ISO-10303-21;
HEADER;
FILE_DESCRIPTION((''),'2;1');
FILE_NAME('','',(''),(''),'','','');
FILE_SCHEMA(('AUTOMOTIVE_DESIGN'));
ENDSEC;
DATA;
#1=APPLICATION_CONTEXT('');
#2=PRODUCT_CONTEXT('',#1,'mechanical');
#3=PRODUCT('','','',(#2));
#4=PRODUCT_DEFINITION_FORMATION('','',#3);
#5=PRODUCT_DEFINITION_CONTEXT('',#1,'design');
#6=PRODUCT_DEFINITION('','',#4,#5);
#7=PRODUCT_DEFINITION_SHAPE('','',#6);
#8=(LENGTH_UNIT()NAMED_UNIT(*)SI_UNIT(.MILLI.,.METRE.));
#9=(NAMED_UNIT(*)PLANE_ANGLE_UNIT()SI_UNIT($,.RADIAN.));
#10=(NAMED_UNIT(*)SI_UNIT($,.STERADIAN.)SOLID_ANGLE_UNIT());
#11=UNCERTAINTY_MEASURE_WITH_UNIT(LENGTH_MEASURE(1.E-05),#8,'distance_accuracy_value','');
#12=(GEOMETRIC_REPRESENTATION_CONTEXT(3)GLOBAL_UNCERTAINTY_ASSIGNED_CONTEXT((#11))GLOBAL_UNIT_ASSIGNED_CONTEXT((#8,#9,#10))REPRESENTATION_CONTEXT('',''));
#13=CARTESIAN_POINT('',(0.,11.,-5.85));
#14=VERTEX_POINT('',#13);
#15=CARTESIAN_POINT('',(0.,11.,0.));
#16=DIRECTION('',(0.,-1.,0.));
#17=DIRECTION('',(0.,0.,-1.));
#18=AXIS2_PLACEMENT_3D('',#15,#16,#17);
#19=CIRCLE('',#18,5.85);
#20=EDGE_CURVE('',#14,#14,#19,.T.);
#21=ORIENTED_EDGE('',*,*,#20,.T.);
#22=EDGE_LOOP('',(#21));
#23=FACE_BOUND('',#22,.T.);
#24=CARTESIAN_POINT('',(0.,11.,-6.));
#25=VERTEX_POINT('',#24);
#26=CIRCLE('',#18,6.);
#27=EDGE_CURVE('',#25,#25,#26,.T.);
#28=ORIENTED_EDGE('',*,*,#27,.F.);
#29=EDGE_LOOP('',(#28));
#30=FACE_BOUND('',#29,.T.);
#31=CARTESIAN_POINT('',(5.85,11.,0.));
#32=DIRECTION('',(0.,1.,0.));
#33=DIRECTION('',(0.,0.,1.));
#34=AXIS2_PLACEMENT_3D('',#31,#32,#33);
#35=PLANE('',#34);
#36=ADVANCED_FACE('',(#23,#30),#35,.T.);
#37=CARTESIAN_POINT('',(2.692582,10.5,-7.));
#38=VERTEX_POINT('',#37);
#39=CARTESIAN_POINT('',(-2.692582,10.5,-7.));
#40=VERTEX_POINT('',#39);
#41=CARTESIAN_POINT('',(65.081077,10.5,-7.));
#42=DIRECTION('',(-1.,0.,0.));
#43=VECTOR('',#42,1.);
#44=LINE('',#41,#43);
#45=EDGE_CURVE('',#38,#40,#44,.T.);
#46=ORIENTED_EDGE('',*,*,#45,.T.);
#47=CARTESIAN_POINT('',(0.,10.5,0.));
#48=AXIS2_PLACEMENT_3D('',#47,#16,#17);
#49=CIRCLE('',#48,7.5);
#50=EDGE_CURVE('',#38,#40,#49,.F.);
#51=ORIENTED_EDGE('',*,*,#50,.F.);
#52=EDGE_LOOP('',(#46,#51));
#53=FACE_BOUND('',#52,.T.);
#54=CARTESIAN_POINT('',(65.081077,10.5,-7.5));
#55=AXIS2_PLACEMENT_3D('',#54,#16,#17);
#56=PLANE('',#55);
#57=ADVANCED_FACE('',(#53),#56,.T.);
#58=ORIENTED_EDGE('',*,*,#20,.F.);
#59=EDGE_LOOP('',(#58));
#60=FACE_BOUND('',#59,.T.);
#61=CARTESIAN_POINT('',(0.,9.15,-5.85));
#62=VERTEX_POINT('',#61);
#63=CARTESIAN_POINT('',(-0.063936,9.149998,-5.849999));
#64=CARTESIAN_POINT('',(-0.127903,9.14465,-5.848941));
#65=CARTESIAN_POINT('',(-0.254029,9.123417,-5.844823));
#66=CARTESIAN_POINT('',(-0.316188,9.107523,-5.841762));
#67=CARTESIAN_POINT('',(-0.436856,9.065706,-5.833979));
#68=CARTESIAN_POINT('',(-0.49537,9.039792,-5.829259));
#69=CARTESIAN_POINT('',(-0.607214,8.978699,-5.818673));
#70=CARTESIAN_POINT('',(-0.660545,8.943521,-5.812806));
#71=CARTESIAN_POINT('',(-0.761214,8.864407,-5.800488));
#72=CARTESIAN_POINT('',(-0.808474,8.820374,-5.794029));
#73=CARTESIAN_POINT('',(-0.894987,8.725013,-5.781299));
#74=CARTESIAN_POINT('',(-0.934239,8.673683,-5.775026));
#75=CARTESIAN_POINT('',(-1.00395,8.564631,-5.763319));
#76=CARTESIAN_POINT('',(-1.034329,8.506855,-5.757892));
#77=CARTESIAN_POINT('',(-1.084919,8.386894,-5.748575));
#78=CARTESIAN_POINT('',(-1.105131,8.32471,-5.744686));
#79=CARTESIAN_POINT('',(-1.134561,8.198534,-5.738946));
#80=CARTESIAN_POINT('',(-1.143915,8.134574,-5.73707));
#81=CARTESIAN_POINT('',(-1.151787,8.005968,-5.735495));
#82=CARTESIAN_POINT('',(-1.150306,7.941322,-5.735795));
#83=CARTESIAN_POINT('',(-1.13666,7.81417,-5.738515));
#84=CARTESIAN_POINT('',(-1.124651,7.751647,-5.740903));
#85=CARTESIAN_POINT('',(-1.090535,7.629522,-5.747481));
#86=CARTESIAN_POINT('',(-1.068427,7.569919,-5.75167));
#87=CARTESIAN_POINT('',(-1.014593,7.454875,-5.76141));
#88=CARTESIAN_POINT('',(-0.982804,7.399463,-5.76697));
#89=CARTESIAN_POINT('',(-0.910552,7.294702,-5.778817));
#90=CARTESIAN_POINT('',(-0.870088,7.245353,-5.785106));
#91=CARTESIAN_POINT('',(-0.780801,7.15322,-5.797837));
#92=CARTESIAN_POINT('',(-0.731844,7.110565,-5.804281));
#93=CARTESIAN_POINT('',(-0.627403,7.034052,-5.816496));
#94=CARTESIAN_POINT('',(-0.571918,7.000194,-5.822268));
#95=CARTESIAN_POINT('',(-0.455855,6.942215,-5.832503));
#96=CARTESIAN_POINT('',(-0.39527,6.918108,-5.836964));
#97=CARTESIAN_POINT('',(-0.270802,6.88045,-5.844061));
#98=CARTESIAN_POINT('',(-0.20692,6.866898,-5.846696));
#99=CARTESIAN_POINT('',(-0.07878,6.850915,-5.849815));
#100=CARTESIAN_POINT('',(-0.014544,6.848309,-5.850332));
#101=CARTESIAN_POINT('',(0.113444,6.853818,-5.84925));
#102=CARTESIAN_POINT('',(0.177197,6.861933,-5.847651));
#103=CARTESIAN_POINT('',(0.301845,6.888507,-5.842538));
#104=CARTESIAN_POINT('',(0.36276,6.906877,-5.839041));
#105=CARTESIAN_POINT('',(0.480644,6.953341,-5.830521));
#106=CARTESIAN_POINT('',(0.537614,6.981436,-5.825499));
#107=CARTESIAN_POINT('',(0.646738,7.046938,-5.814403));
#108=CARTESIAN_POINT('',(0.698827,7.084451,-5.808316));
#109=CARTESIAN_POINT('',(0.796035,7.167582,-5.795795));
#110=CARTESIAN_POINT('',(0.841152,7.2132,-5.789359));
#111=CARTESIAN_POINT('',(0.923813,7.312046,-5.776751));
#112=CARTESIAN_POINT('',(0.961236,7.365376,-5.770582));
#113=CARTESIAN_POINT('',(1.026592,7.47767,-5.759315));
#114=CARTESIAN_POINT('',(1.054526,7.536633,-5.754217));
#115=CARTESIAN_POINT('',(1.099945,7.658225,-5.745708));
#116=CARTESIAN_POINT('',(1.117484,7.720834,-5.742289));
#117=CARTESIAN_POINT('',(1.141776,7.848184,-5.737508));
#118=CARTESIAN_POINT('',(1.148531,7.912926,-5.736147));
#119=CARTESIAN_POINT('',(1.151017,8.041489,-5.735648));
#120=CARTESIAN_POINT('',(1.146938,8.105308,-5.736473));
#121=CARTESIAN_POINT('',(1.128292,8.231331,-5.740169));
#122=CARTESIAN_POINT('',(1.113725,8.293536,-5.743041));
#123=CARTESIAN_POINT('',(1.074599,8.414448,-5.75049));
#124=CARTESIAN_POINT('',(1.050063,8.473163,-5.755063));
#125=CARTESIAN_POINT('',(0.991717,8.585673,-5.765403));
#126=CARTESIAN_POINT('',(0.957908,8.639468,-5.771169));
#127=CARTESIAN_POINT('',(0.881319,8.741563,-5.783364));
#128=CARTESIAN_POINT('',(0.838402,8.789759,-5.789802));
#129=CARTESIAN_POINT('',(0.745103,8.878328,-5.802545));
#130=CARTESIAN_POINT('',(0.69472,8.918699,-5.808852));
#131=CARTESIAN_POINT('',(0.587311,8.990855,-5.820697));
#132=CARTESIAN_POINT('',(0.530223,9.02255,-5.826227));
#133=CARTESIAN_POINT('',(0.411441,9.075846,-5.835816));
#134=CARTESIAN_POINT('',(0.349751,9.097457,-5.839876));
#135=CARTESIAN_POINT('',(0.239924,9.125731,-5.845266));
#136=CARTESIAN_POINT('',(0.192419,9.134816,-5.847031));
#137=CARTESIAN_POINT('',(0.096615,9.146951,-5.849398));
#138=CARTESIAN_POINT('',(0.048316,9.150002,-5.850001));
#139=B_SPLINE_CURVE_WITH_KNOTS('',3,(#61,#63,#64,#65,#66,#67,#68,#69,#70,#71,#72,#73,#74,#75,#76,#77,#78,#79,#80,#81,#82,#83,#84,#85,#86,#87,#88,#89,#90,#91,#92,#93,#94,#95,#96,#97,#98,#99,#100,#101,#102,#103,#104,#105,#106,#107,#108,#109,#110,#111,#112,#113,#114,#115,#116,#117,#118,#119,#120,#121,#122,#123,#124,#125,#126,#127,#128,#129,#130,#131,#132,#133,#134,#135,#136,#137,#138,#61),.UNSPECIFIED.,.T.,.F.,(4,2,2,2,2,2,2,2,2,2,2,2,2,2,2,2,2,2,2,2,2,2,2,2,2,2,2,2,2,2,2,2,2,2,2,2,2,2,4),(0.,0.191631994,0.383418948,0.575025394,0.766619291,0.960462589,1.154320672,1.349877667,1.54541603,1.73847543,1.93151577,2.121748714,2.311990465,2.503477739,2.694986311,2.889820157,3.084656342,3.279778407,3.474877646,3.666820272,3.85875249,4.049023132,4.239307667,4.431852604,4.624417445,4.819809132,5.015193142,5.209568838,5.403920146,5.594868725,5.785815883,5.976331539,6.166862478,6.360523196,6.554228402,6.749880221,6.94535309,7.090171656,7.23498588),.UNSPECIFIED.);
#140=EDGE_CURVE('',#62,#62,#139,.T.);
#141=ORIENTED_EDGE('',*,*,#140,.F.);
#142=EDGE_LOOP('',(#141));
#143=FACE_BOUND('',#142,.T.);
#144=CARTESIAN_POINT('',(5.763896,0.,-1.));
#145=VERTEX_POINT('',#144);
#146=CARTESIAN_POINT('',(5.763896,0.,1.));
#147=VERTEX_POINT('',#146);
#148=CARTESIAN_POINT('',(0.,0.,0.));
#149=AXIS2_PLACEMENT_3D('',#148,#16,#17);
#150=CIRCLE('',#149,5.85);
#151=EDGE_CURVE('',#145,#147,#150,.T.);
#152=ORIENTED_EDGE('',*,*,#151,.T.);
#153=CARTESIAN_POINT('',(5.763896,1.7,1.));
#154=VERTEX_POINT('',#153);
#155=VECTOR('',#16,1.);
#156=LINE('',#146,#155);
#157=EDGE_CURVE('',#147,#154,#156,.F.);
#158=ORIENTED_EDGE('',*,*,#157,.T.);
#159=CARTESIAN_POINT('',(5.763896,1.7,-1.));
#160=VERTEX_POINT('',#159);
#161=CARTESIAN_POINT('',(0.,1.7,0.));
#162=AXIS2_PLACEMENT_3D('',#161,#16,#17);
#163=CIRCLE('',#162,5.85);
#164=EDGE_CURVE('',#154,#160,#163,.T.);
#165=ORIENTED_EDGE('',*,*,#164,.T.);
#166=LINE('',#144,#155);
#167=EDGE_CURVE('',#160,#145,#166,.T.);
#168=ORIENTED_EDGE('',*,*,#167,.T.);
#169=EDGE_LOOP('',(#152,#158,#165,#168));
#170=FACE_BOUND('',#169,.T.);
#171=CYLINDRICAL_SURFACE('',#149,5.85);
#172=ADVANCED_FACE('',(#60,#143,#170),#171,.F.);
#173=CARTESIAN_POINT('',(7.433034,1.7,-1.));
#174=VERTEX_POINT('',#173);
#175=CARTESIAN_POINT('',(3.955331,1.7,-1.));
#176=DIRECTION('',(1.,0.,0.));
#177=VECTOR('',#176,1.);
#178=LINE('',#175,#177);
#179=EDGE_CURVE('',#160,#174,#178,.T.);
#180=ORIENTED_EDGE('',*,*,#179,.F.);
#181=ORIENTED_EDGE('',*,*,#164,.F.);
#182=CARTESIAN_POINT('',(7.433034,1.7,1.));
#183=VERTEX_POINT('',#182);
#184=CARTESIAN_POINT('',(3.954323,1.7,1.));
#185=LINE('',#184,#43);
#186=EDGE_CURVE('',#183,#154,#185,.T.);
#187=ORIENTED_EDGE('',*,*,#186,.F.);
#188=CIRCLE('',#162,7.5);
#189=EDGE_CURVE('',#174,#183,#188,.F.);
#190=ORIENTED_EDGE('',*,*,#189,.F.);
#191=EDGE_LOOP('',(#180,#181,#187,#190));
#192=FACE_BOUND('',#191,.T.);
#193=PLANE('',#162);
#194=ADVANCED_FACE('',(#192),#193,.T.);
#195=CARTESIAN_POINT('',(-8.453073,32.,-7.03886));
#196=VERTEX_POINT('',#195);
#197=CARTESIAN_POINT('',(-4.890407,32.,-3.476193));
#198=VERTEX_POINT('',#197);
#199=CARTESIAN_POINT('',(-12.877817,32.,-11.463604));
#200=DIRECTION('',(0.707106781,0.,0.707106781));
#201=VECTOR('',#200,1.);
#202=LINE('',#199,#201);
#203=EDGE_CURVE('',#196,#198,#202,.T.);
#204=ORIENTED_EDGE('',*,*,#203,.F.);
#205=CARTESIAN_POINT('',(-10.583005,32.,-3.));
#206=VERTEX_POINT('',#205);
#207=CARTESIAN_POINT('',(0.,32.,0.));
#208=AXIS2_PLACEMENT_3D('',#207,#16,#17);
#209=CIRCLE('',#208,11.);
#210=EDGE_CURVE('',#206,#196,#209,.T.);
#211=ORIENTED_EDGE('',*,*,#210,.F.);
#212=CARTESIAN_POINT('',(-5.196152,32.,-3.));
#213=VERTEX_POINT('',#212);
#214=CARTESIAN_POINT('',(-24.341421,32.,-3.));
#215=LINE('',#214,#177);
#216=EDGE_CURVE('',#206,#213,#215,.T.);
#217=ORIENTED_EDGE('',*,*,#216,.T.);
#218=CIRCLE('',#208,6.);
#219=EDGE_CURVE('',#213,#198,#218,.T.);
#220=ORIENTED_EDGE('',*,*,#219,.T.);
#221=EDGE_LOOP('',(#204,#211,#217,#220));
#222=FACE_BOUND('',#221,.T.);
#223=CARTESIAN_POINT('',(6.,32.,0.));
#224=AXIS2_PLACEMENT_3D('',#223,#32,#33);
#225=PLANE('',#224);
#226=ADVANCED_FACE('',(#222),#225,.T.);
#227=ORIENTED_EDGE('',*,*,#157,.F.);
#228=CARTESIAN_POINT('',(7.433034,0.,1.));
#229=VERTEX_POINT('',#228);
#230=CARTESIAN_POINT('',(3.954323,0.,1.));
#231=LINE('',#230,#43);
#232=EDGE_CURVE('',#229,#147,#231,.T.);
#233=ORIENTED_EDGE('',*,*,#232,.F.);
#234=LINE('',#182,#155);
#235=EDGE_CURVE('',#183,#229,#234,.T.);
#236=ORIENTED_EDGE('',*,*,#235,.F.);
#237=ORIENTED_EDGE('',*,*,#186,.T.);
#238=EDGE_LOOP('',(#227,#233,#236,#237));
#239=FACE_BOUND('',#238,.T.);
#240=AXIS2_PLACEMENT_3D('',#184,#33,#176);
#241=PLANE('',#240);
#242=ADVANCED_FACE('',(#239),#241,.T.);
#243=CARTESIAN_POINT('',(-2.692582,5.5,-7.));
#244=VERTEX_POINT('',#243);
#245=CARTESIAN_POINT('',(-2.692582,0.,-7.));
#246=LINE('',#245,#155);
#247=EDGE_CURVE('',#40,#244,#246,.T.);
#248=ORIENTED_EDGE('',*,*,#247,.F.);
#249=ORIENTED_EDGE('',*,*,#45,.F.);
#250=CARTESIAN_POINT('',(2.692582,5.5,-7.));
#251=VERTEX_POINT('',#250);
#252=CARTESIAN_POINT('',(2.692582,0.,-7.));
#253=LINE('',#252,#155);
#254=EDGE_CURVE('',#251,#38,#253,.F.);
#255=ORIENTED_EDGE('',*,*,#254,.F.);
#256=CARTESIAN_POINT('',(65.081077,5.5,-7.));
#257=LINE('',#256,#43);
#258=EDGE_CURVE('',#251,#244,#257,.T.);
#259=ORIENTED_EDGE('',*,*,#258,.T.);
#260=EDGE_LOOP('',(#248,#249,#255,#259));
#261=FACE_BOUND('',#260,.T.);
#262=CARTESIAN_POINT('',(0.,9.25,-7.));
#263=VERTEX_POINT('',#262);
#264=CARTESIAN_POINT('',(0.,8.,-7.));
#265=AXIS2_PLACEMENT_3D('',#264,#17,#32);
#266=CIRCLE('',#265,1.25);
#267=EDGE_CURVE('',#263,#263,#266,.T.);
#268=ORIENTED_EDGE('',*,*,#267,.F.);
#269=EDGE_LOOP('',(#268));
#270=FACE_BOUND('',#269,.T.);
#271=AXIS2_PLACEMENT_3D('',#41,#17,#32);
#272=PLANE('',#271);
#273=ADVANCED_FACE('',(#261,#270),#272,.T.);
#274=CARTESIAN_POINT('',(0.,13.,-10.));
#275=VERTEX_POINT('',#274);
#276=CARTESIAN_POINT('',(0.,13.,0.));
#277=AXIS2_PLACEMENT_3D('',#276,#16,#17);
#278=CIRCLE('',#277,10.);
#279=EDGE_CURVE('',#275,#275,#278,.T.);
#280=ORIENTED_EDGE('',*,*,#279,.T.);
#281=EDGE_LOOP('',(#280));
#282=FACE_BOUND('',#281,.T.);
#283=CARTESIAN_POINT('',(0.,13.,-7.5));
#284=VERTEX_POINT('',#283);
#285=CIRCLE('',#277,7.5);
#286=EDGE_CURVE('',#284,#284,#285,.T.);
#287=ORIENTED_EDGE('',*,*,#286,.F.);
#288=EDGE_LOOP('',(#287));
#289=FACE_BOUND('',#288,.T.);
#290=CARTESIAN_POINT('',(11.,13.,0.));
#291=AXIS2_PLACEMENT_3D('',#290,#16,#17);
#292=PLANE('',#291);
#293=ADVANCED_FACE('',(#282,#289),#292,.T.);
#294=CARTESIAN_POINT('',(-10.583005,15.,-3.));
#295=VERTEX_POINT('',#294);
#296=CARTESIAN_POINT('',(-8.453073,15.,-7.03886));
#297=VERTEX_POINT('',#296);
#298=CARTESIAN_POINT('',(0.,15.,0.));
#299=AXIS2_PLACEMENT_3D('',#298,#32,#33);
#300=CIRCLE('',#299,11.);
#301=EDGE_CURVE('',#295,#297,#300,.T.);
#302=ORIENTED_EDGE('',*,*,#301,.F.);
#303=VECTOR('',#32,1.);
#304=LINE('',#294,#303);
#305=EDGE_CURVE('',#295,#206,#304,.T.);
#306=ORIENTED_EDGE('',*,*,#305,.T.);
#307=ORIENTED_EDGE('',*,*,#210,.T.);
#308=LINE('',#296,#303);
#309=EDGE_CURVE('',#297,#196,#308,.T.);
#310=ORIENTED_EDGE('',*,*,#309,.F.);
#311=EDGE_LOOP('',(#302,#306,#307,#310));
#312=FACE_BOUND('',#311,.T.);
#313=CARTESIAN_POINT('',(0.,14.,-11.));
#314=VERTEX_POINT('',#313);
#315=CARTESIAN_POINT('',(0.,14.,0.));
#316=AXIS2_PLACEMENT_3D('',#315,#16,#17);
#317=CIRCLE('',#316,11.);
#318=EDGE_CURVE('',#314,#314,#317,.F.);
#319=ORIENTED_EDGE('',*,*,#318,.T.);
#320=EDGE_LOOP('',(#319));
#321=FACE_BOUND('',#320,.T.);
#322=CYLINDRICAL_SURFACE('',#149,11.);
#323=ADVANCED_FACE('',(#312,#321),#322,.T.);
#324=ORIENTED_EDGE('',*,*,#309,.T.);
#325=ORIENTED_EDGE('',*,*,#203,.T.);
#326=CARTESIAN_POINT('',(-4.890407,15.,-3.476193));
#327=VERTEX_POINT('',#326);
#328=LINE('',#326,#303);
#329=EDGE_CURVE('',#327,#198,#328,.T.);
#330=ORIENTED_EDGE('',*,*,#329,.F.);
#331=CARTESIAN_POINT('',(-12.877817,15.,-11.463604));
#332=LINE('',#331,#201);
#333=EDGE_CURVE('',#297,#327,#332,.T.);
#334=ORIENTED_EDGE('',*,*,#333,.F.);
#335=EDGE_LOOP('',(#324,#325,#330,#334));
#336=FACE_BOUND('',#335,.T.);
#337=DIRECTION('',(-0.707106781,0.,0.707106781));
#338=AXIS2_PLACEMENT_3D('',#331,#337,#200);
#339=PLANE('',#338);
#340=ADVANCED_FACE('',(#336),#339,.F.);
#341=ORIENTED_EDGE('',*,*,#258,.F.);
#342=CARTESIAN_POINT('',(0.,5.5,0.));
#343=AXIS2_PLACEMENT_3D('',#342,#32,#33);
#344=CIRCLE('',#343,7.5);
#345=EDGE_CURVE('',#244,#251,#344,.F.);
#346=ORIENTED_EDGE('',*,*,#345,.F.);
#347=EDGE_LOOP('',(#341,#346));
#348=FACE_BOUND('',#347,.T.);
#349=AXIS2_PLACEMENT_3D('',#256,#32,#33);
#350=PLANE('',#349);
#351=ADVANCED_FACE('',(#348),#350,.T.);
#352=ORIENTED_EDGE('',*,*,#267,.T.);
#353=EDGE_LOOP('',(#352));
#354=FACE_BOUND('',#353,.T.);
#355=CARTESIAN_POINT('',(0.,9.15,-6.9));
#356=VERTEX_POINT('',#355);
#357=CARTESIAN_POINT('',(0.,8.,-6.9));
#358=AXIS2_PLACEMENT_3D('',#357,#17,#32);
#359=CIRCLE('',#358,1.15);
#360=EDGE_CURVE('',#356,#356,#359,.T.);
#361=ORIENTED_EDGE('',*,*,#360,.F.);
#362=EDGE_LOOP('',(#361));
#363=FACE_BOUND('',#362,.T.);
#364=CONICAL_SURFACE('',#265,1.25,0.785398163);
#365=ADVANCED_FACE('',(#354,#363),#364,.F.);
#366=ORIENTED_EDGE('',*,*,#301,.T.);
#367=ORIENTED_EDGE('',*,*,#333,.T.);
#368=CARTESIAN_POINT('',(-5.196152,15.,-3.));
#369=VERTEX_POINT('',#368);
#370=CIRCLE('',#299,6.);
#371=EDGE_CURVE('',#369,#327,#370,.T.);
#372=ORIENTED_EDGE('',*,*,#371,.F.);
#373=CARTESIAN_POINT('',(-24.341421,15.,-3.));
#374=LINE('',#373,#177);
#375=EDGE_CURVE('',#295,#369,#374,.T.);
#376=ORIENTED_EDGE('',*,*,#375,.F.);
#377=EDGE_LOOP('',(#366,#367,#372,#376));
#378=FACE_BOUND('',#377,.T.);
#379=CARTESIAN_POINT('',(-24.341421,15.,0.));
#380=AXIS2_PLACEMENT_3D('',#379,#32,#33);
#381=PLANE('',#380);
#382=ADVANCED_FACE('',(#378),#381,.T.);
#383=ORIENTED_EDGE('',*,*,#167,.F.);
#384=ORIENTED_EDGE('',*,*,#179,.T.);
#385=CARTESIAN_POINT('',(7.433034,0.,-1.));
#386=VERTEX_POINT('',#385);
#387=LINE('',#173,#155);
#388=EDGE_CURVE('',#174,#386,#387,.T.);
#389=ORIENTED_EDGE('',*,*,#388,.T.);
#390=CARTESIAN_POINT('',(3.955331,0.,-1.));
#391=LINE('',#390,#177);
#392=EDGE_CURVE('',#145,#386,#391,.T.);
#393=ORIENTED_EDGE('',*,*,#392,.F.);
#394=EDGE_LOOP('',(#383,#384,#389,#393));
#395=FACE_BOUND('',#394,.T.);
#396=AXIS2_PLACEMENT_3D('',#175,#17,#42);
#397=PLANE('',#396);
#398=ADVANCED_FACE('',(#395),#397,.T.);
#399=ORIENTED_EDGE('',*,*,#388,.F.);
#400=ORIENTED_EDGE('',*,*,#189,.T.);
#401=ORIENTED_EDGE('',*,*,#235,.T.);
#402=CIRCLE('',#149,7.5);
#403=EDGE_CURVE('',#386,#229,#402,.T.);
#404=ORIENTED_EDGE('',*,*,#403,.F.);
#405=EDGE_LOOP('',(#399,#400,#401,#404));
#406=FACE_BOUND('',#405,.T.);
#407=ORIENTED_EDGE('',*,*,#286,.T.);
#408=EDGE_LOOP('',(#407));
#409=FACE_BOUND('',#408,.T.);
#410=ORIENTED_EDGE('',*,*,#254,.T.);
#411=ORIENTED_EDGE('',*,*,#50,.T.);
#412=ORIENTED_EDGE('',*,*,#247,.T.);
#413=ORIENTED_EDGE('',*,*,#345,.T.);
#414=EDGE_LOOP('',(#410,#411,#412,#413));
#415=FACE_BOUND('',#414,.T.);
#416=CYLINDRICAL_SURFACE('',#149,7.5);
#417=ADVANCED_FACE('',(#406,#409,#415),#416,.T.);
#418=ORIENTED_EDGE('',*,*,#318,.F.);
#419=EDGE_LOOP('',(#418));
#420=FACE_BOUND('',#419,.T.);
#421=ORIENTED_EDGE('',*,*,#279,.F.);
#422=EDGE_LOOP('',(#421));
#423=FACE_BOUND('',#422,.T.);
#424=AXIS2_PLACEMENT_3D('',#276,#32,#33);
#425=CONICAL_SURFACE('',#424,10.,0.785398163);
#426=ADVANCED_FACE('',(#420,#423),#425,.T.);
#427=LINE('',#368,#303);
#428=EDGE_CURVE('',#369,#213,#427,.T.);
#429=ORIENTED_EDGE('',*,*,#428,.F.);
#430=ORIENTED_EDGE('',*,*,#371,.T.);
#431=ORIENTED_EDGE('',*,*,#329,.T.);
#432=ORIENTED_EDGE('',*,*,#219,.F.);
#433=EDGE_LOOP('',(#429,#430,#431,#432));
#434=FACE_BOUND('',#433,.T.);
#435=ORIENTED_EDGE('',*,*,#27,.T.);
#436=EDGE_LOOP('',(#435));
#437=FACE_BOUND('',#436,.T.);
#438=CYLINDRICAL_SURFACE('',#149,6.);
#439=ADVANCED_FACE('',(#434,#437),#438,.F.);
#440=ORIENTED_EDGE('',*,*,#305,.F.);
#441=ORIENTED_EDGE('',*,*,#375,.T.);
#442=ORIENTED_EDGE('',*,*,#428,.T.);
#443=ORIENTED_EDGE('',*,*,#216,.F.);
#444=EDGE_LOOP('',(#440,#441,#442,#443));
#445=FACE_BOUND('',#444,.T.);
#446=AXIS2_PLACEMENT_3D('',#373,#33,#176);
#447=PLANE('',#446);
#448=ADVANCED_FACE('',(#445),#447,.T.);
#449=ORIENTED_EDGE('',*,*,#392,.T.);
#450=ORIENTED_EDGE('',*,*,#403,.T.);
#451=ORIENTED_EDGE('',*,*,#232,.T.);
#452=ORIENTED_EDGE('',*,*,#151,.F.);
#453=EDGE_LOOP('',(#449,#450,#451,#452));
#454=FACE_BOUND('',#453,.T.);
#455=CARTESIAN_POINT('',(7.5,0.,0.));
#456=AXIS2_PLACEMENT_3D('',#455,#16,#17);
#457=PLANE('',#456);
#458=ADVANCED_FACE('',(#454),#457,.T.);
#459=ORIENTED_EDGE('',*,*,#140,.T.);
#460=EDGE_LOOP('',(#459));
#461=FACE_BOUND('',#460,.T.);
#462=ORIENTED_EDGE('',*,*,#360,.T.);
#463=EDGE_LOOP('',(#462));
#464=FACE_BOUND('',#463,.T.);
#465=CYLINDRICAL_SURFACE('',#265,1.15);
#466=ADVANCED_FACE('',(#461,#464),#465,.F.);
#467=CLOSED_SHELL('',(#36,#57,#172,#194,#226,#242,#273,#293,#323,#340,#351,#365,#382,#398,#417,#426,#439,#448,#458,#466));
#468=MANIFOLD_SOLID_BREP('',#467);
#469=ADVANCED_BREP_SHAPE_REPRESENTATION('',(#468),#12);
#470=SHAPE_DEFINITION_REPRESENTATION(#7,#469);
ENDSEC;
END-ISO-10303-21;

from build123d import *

# Parameters (mm, degrees)
CUT_EXTRUDE_2_DEPTH      = 17
CHAMFER_1_SIZE           = 1
SKETCH_5_OUTSIDE_W       = 32.926
SKETCH_5_OUTSIDE_H       = 32.926
CUT_EXTRUDE_4_DEPTH      = 1.7
CUT_EXTRUDE_5_DEPTH      = 36.580893749
CUT_EXTRUDE_5_DEPTH_BACK = 36.580893749


# Read off the part's stored shape, not the designer's step: Диаметр отверстия Ø2.3 (2.3)1
with BuildPart() as part:
    # Эскиз1 → Повернуть1 (revolve)
    with BuildSketch(Plane.XY, mode=Mode.PRIVATE) as revolve_1_sk:
        Polygon((5.85, 0), (5.85, 11), (6, 11), (6, 32), (11, 32), (11, 13), (7.5, 13), (7.5, 0), align=None)
    revolve(revolve_1_sk.sketch.rotate(Axis((0, 0, 0), (0, 1, 0)), 90), axis=Axis((0, 0, 0), (0, 1, 0)))

    # Эскиз2 → Вырез-Вытянуть2 (cut)
    with BuildSketch(Plane(origin=(0, 32, 0), x_dir=(1, 0, 0), z_dir=(0, 1, 0))):
        with BuildLine():
            Line((-5.196152423, 3), (-10.583005244, 3))
            ThreePointArc((-10.583005244, 3), (-1.514421063, -10.895252583), (11, 0))
            ThreePointArc((11, 0), (3.74273909, 10.343689096), (-8.453073474, 7.038859911))
            Line((-8.453073474, 7.038859911), (-4.890406914, 3.476193351))
            ThreePointArc((-4.890406914, 3.476193351), (1.824494247, 5.715874451), (6, 0))
            ThreePointArc((6, 0), (-1.552914271, -5.795554958), (-5.196152423, 3))
        make_face()
    extrude(amount=-CUT_EXTRUDE_2_DEPTH, mode=Mode.SUBTRACT)

    # Фаска1
    chamfer_1_edges = [part.edges().sort_by_distance(p)[0] for p in [
        (0, 13, 11),
    ]]
    chamfer(chamfer_1_edges, length=CHAMFER_1_SIZE)

    # Эскиз5 outside → Вырез-Вытянуть4 (cut)
    with BuildSketch(Plane.XZ):
        Rectangle(SKETCH_5_OUTSIDE_W, SKETCH_5_OUTSIDE_H)
        with BuildLine():
            Line((0, 0), (3.954322794, 1))
            Line((3.954322794, 1), (7.433034374, 1))
            ThreePointArc((7.433034374, 1), (7.5, 0), (7.433034374, -1))
            Line((7.433034374, -1), (3.955330555, -1))
            Line((3.955330555, -1), (0, 0))
        make_face(mode=Mode.SUBTRACT)
    extrude(amount=-CUT_EXTRUDE_4_DEPTH, mode=Mode.SUBTRACT)

    # Эскиз6 → Вырез-Вытянуть5 (cut, two sides: drawn at the far end of the back side and taken through both)
    with BuildSketch(Plane(origin=(0, 0, 0), x_dir=(0, 0, -1), z_dir=(1, 0, 0)).offset(-CUT_EXTRUDE_5_DEPTH_BACK)):
        Polygon((82.137450445, 10.5), (7.5, 10.5), (7, 10.5), (7, 5.5), (7.5, 5.5), (82.137450445, 5.5), (231.412351334, 5.5), (231.412351334, 10.5), align=None)
    extrude(amount=CUT_EXTRUDE_5_DEPTH + CUT_EXTRUDE_5_DEPTH_BACK, mode=Mode.SUBTRACT)

    # Диаметр отверстия Ø2.3 (2.3)1 outline → Диаметр отверстия Ø2.3 (2.3)1 (revolve, cut)
    with BuildSketch(Plane.XZ.offset(-8)):
        Polygon((1.15, -6.9), (1.15, -5.735802951), (0, -5.735802951), (0, -7), (1.25, -7), align=None)
    revolve(axis=Axis((0, 8, 0), (0, 0, 1)), mode=Mode.SUBTRACT)


solid = part.part
